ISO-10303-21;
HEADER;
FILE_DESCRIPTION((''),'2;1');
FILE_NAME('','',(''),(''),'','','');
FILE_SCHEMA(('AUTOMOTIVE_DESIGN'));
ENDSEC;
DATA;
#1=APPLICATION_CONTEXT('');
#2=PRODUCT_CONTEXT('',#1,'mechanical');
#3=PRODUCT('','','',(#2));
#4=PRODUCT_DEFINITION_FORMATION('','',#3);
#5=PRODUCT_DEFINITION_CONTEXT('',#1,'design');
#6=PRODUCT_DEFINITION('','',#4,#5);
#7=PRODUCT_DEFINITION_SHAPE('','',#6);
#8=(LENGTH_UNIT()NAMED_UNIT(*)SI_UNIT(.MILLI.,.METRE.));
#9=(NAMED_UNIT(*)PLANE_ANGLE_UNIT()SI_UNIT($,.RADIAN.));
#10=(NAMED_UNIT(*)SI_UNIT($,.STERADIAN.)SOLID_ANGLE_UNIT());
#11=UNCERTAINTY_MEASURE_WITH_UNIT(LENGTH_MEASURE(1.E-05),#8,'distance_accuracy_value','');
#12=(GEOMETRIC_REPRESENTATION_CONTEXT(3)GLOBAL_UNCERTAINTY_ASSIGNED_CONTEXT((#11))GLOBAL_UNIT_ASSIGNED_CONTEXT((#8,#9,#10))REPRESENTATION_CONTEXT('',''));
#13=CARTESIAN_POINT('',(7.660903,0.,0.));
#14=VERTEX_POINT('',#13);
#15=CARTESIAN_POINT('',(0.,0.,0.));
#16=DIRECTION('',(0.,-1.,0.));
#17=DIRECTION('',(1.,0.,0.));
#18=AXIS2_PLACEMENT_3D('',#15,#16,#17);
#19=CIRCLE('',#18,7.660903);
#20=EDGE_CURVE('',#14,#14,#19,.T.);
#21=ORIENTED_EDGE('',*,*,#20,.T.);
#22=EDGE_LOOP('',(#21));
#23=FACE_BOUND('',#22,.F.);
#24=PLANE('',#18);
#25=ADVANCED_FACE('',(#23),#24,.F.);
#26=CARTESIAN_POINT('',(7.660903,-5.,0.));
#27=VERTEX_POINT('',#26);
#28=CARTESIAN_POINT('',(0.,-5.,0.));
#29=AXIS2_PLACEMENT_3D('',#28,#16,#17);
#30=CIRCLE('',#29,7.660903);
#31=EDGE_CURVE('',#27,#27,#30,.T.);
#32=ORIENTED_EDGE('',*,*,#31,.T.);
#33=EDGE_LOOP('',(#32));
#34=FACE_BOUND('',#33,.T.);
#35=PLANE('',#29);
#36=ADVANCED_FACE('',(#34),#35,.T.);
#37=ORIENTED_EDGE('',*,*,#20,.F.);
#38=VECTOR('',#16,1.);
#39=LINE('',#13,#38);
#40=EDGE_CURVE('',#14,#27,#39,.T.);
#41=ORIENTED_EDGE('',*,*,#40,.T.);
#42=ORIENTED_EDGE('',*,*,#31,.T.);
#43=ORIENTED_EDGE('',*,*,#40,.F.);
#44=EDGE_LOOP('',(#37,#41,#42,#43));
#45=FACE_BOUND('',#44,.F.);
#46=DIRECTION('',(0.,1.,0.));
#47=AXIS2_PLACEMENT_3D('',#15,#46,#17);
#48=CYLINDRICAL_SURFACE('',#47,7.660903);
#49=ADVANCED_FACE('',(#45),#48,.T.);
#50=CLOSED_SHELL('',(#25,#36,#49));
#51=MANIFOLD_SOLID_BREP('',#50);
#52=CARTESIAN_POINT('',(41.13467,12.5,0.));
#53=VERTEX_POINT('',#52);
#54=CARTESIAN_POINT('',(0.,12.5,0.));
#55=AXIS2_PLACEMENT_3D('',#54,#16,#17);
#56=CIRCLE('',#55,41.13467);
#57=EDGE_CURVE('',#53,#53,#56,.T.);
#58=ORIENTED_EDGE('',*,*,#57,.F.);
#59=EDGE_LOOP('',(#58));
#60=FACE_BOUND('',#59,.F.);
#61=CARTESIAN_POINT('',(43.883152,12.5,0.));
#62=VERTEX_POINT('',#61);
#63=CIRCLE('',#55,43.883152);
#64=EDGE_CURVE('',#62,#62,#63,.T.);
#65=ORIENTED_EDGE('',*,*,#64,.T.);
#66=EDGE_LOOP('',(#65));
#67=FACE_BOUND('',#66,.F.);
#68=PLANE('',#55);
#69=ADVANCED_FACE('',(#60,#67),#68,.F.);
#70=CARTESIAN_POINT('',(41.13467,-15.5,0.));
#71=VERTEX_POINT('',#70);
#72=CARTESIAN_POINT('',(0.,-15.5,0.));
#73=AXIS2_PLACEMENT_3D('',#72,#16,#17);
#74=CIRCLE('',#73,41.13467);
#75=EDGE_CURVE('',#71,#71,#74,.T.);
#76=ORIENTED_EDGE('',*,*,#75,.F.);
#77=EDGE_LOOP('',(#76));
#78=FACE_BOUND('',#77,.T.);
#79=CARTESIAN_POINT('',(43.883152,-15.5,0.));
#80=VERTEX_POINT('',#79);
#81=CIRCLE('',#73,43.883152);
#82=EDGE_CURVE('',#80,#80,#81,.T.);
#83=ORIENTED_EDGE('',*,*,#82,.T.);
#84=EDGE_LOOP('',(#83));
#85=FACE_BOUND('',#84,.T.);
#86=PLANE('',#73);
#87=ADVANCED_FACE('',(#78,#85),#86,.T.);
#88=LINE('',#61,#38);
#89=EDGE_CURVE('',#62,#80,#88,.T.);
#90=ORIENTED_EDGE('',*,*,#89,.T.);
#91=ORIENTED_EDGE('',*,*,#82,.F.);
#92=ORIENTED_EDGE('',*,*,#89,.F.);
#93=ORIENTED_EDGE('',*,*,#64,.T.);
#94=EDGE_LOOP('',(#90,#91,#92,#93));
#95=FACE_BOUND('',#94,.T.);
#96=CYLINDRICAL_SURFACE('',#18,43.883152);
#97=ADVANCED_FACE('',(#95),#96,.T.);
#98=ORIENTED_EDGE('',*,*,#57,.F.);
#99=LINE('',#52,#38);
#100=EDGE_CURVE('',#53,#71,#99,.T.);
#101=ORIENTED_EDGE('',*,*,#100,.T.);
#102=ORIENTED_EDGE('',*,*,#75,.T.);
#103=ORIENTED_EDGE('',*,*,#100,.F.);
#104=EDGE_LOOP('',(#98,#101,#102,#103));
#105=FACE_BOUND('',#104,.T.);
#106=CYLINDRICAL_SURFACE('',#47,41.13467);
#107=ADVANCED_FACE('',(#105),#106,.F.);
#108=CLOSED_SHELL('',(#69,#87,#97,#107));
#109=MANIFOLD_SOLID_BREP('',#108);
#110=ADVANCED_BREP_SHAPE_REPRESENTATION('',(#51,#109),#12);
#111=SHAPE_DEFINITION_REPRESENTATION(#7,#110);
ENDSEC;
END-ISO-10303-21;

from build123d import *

# Parameters (mm, degrees)
F0_R     = 7.6609031883
F1_DEPTH = 5
F2_R     = 43.8831518485
F2_R_2   = 41.1346697105
F3_DEPTH = 15.5
F4_DEPTH = 25
F5_DEPTH = 12.5


# Not quite as in the source:
# - the program builds the solid bodies; features that only make, move or delete a surface that nothing else refers to are left out


with BuildPart() as f1:
    # F0 (on Front) → F1 (new body)
    with BuildSketch(Plane.XZ):
        Circle(F0_R)
    extrude(amount=F1_DEPTH)


with BuildPart() as f3:
    # F2 (on Front) → F3 (new body, symmetric)
    with BuildSketch(Plane.XZ):
        Circle(F2_R)
        Circle(F2_R_2, mode=Mode.SUBTRACT)
    extrude(amount=F3_DEPTH, both=True)

    # F2 (on Front) → F4 (cut)
    with BuildSketch(Plane.XZ):
        Circle(F2_R)
        Circle(F2_R_2, mode=Mode.SUBTRACT)
    extrude(amount=-F4_DEPTH, mode=Mode.SUBTRACT)

    # F2 (on Front) → F5 (join, symmetric)
    with BuildSketch(Plane.XZ):
        Circle(F2_R)
        Circle(F2_R_2, mode=Mode.SUBTRACT)
    extrude(amount=F5_DEPTH, both=True)


solid = Compound([f1.part, f3.part])
